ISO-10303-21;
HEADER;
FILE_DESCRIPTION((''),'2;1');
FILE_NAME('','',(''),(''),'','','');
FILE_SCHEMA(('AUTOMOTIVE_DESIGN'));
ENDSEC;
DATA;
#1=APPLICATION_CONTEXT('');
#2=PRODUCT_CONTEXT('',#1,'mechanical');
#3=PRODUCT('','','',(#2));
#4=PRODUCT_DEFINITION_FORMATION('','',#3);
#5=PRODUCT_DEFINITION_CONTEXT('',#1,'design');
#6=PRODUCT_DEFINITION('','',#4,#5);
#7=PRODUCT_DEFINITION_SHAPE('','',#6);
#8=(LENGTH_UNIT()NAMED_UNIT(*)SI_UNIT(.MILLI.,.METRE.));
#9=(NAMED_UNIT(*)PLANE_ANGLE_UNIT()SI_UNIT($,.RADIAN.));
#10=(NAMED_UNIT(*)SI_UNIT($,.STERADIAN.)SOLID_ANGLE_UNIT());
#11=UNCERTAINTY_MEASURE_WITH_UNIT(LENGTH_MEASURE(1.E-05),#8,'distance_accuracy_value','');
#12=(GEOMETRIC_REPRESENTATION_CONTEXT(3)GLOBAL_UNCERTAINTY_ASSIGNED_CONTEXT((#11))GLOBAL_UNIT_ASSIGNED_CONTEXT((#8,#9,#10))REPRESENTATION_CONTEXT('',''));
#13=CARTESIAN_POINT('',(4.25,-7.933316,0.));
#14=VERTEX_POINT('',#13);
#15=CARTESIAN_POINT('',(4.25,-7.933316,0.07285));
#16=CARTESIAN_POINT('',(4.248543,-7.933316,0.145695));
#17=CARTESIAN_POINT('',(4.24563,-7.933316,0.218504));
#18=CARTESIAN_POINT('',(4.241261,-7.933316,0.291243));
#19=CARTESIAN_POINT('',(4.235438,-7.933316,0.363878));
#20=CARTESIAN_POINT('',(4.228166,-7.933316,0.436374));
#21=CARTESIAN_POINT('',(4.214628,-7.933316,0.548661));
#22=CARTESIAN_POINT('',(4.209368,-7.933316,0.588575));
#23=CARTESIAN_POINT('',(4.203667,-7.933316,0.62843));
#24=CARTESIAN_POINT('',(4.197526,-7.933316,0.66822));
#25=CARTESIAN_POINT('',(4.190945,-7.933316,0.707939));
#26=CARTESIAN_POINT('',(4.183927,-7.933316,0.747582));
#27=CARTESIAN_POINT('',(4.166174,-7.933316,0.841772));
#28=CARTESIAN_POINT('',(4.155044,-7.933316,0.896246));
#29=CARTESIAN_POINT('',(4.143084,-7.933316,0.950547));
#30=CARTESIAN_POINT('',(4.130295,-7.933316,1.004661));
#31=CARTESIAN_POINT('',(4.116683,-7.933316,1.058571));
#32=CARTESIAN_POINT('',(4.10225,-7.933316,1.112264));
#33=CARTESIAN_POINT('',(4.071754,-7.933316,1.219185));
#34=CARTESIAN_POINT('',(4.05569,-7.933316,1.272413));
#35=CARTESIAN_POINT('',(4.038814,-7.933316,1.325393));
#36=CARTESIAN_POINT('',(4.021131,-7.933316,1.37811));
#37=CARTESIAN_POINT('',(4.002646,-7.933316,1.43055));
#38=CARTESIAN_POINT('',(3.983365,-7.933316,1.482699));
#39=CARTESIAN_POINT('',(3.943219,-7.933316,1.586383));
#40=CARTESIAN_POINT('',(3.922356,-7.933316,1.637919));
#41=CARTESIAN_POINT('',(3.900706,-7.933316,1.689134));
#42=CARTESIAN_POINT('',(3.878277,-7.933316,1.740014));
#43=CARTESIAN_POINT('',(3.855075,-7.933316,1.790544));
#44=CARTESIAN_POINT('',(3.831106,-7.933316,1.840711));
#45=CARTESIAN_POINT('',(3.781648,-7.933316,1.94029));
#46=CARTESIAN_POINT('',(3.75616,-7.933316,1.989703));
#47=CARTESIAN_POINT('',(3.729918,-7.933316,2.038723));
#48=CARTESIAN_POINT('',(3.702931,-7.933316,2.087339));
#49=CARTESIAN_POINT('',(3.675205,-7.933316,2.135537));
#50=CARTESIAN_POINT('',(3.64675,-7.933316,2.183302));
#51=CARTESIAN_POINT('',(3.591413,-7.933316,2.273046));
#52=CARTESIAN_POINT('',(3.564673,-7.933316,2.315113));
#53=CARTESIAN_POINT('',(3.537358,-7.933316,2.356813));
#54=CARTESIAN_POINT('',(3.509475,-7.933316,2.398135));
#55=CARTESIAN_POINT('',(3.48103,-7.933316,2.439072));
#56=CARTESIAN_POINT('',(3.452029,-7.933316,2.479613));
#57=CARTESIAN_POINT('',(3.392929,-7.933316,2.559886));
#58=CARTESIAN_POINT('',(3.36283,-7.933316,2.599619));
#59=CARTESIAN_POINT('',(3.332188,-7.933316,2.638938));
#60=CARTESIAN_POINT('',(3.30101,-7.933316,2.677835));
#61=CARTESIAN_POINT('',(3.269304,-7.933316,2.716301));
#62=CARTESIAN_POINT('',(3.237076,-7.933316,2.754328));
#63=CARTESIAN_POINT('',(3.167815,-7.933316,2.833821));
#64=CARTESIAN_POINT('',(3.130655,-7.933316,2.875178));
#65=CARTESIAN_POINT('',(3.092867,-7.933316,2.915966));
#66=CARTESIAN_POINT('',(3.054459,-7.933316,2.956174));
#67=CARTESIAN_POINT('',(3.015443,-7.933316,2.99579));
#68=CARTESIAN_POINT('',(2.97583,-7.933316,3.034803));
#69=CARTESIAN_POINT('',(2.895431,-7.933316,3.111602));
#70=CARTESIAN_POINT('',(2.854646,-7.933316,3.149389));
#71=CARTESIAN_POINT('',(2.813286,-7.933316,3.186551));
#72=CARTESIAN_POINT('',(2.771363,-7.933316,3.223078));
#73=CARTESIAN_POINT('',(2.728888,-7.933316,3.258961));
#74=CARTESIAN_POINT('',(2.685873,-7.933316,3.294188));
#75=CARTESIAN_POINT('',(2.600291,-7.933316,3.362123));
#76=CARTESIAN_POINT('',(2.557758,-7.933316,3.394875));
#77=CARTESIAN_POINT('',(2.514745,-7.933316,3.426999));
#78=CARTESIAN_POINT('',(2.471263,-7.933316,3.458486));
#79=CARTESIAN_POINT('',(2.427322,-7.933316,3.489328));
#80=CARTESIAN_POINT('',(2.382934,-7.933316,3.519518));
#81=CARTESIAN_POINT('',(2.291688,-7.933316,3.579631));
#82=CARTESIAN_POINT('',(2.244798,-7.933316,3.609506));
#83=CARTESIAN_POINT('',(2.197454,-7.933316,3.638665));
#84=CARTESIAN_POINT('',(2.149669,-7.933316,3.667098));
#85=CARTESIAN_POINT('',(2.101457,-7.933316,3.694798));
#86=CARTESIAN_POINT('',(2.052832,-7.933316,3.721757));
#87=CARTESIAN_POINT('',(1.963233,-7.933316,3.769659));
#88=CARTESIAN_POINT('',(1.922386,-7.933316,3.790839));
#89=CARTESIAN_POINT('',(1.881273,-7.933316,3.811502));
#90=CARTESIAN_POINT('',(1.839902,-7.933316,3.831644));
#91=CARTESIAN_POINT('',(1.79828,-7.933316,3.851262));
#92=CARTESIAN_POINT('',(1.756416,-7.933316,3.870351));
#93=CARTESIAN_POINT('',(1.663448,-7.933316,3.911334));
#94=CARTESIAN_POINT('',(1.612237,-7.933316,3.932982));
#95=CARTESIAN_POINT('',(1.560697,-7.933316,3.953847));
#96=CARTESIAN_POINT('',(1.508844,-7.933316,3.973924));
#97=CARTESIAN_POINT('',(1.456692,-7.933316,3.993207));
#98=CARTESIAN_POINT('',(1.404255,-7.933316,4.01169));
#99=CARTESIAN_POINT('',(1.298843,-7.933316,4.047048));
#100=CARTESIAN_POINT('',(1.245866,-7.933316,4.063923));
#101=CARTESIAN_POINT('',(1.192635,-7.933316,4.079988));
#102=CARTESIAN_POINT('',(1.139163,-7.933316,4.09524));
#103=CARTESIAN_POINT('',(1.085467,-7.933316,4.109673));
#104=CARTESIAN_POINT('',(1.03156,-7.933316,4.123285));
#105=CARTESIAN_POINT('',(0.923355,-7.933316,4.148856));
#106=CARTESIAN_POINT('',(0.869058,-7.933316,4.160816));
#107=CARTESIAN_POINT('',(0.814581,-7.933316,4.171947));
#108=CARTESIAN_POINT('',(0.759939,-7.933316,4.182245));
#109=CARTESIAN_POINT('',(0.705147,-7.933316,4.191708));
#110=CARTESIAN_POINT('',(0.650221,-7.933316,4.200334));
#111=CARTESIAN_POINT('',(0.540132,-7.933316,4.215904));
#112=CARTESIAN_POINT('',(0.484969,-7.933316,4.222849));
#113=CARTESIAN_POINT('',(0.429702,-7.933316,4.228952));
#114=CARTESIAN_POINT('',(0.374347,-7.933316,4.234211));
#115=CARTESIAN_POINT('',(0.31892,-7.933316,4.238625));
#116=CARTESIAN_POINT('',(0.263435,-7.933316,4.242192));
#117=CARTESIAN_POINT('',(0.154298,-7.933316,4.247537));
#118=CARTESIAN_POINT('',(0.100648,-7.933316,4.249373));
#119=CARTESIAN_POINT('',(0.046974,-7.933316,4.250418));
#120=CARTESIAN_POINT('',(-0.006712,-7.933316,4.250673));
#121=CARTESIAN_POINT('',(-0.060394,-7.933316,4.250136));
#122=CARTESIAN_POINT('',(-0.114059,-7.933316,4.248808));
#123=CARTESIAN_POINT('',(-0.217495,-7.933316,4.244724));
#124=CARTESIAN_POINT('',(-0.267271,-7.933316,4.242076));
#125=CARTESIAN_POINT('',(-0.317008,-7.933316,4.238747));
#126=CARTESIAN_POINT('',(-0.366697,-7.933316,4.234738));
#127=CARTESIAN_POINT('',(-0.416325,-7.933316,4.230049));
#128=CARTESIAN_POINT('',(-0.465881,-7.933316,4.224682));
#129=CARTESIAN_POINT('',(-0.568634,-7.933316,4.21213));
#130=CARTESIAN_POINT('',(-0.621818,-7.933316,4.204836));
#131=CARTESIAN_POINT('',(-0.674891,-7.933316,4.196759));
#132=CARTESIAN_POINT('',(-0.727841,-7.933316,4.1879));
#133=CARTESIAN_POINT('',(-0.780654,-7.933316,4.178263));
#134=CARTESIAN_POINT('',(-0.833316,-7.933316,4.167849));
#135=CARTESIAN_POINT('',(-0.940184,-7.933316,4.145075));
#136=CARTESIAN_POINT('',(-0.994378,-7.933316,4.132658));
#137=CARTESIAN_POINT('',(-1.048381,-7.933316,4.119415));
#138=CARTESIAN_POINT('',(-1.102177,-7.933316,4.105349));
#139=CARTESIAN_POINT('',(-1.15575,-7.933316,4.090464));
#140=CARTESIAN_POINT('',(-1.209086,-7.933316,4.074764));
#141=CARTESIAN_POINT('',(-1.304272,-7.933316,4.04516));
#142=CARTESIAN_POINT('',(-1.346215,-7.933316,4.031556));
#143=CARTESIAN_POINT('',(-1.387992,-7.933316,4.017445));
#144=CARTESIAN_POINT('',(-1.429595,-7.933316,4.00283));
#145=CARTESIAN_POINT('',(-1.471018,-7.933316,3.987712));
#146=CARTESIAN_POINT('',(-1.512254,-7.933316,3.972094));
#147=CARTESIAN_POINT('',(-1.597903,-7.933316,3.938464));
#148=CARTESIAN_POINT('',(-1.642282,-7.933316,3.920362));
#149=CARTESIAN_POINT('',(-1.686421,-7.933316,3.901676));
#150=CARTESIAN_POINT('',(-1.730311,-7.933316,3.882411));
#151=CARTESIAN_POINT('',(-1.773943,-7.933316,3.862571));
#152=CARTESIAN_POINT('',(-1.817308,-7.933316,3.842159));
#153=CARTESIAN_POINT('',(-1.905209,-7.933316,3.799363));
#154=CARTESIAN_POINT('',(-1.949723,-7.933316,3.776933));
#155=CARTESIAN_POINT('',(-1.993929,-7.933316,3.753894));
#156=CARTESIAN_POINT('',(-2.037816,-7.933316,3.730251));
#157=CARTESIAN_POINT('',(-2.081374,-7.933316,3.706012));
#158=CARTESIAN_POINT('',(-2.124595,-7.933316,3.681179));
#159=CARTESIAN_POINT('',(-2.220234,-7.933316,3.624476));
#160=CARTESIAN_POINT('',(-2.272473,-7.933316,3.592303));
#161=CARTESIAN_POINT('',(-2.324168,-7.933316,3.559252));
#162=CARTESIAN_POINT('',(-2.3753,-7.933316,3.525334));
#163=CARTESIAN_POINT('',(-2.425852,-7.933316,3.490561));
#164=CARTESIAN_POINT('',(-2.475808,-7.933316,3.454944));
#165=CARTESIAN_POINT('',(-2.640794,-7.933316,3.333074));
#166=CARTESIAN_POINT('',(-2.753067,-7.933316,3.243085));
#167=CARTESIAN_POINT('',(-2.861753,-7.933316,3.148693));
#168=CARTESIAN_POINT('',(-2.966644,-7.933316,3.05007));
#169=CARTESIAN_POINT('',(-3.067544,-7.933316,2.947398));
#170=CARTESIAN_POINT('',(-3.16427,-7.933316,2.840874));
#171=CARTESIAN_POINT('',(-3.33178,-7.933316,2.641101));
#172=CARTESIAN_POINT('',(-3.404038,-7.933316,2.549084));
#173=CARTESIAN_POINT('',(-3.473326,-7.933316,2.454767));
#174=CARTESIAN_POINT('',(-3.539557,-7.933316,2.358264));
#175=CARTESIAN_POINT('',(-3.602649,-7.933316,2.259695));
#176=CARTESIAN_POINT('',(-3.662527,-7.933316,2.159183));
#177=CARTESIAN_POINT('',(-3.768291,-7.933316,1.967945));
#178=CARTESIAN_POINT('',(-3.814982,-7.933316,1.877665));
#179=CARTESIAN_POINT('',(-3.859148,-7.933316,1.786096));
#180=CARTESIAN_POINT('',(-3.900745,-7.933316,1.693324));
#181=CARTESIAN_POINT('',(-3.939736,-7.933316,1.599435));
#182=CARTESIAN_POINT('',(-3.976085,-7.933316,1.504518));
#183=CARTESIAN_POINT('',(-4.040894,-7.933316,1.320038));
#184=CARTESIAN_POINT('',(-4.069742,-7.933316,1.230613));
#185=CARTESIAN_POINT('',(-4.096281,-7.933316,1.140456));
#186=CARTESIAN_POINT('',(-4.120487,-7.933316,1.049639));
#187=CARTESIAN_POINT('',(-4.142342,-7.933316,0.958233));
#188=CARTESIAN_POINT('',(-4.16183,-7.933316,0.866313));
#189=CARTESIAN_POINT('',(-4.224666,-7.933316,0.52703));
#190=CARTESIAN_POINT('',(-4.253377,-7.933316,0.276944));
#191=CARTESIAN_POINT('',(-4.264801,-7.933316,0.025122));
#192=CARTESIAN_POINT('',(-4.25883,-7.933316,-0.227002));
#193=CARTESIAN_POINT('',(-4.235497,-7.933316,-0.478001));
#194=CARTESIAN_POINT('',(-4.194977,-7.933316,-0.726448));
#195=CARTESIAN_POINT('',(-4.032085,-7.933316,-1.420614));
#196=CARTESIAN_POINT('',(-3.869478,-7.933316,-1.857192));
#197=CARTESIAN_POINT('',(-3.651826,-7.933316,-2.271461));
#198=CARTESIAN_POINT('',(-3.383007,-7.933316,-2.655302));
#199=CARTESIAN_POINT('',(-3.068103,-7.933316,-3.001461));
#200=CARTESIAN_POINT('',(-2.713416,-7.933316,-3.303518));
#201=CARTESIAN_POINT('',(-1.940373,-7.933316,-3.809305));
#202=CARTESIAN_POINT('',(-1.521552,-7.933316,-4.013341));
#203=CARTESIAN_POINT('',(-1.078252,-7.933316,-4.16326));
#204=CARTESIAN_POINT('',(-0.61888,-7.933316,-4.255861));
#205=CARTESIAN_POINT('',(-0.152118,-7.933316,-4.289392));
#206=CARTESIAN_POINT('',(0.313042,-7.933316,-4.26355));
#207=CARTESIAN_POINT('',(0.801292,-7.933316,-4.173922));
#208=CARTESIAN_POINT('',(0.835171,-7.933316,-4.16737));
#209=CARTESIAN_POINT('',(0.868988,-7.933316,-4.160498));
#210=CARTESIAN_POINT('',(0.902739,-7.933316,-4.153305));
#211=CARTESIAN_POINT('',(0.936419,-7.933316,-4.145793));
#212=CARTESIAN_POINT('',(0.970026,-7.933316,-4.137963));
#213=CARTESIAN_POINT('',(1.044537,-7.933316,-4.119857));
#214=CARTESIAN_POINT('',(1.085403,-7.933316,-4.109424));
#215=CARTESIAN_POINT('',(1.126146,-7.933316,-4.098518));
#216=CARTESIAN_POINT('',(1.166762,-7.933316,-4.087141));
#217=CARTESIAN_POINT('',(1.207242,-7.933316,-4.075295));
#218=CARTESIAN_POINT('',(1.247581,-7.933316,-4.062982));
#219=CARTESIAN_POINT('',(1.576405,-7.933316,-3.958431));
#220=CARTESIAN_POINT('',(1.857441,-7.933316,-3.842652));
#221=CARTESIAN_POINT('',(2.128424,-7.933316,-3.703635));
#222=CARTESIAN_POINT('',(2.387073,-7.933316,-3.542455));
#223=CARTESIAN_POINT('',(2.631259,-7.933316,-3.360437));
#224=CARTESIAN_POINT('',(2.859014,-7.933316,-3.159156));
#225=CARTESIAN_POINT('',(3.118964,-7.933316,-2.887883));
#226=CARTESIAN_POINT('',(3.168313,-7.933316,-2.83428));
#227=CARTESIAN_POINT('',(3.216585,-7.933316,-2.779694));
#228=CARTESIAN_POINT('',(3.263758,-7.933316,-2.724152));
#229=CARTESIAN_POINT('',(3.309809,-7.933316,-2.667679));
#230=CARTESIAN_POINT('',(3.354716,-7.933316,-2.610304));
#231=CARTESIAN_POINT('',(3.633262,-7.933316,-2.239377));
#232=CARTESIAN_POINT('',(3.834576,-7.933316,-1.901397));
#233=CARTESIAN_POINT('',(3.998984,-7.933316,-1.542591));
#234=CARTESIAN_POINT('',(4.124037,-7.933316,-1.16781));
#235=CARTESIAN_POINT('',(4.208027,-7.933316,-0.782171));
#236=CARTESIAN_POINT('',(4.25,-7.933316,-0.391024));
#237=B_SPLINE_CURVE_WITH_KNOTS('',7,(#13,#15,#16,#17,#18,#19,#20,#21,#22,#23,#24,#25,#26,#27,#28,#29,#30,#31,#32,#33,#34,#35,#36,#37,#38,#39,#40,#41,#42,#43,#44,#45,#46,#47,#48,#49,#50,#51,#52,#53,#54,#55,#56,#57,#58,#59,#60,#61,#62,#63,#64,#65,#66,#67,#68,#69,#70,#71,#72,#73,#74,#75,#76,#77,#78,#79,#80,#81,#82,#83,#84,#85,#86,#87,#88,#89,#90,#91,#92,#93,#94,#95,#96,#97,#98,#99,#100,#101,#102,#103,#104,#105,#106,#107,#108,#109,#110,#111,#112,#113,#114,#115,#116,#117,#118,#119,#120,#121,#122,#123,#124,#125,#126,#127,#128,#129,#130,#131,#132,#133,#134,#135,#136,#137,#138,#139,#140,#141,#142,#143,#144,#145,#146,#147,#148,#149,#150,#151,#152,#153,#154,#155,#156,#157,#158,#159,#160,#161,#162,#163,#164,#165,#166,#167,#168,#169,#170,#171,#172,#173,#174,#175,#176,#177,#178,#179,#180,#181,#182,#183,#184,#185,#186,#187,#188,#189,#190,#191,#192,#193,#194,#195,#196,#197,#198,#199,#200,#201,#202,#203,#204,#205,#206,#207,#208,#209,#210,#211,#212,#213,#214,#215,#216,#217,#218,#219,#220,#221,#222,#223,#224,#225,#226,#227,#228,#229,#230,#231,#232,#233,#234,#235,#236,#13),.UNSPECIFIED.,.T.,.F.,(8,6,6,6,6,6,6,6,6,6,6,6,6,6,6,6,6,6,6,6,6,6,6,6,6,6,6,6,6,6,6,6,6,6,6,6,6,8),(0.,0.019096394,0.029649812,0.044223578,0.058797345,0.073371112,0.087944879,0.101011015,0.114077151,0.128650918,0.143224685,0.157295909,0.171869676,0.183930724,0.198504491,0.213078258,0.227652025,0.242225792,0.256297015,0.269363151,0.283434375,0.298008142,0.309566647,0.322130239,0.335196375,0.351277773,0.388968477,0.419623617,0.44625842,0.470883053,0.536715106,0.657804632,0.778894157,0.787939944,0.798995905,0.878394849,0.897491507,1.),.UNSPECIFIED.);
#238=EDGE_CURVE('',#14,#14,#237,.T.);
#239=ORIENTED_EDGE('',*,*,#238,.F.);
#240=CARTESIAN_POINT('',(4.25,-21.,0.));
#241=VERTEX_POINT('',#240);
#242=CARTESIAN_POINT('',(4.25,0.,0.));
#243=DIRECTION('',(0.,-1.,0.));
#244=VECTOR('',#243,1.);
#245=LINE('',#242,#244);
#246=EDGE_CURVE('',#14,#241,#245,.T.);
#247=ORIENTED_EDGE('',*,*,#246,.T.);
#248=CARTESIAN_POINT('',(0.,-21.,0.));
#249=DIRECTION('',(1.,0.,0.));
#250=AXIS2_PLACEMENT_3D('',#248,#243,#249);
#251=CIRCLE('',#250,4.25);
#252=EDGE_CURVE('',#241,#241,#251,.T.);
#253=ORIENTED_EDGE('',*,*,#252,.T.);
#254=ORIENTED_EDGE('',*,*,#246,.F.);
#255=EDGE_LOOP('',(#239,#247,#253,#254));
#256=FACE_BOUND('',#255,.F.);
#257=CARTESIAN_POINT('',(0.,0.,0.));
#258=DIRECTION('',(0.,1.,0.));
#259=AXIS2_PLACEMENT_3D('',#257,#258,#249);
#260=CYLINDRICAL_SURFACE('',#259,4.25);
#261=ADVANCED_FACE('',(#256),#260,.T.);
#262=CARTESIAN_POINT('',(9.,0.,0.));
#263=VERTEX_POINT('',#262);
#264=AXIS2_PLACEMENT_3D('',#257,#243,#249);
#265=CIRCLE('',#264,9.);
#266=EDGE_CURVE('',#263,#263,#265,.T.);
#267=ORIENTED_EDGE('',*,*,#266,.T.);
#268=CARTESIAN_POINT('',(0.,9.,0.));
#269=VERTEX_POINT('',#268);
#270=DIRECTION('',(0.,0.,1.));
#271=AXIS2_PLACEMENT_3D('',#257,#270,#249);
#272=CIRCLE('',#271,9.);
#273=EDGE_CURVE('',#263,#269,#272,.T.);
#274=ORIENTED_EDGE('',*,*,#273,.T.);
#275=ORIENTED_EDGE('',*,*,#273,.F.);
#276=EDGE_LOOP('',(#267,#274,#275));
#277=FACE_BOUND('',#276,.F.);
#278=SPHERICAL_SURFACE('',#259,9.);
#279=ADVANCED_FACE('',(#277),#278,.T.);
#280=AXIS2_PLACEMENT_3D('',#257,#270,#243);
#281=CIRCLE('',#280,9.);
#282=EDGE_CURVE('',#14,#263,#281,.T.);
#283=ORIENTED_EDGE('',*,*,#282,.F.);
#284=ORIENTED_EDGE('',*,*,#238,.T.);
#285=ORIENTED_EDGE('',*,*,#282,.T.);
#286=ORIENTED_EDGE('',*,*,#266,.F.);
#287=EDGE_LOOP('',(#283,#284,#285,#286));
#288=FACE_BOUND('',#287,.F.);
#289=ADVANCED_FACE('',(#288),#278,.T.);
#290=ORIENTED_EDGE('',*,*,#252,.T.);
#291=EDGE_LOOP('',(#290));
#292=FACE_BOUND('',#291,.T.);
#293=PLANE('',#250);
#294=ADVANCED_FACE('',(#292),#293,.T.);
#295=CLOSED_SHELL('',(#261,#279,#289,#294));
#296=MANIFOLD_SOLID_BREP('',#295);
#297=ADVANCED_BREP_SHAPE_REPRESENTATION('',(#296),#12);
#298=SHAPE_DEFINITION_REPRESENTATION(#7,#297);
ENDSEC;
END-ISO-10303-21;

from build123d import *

# Parameters (mm, degrees)
F2_R     = 4.25
F3_DEPTH = 21


with BuildPart() as f1:
    # F0 (on Top) → F1 (revolve)
    with BuildSketch(Plane.XY):
        with BuildLine():
            ThreePointArc((0, -9), (6.3639610307, -6.3639610307), (9, 0))
            ThreePointArc((9, 0), (6.3639610307, 6.3639610307), (0, 9))
            Line((0, 9), (0, 0))
            Line((0, 0), (0, -9))
        make_face()
    revolve(axis=Axis((0, 0, 0), (0, -1, 0)))

    # F2 (on Front) → F3 (join)
    with BuildSketch(Plane.XZ):
        Circle(F2_R)
    extrude(amount=F3_DEPTH)


solid = f1.part
